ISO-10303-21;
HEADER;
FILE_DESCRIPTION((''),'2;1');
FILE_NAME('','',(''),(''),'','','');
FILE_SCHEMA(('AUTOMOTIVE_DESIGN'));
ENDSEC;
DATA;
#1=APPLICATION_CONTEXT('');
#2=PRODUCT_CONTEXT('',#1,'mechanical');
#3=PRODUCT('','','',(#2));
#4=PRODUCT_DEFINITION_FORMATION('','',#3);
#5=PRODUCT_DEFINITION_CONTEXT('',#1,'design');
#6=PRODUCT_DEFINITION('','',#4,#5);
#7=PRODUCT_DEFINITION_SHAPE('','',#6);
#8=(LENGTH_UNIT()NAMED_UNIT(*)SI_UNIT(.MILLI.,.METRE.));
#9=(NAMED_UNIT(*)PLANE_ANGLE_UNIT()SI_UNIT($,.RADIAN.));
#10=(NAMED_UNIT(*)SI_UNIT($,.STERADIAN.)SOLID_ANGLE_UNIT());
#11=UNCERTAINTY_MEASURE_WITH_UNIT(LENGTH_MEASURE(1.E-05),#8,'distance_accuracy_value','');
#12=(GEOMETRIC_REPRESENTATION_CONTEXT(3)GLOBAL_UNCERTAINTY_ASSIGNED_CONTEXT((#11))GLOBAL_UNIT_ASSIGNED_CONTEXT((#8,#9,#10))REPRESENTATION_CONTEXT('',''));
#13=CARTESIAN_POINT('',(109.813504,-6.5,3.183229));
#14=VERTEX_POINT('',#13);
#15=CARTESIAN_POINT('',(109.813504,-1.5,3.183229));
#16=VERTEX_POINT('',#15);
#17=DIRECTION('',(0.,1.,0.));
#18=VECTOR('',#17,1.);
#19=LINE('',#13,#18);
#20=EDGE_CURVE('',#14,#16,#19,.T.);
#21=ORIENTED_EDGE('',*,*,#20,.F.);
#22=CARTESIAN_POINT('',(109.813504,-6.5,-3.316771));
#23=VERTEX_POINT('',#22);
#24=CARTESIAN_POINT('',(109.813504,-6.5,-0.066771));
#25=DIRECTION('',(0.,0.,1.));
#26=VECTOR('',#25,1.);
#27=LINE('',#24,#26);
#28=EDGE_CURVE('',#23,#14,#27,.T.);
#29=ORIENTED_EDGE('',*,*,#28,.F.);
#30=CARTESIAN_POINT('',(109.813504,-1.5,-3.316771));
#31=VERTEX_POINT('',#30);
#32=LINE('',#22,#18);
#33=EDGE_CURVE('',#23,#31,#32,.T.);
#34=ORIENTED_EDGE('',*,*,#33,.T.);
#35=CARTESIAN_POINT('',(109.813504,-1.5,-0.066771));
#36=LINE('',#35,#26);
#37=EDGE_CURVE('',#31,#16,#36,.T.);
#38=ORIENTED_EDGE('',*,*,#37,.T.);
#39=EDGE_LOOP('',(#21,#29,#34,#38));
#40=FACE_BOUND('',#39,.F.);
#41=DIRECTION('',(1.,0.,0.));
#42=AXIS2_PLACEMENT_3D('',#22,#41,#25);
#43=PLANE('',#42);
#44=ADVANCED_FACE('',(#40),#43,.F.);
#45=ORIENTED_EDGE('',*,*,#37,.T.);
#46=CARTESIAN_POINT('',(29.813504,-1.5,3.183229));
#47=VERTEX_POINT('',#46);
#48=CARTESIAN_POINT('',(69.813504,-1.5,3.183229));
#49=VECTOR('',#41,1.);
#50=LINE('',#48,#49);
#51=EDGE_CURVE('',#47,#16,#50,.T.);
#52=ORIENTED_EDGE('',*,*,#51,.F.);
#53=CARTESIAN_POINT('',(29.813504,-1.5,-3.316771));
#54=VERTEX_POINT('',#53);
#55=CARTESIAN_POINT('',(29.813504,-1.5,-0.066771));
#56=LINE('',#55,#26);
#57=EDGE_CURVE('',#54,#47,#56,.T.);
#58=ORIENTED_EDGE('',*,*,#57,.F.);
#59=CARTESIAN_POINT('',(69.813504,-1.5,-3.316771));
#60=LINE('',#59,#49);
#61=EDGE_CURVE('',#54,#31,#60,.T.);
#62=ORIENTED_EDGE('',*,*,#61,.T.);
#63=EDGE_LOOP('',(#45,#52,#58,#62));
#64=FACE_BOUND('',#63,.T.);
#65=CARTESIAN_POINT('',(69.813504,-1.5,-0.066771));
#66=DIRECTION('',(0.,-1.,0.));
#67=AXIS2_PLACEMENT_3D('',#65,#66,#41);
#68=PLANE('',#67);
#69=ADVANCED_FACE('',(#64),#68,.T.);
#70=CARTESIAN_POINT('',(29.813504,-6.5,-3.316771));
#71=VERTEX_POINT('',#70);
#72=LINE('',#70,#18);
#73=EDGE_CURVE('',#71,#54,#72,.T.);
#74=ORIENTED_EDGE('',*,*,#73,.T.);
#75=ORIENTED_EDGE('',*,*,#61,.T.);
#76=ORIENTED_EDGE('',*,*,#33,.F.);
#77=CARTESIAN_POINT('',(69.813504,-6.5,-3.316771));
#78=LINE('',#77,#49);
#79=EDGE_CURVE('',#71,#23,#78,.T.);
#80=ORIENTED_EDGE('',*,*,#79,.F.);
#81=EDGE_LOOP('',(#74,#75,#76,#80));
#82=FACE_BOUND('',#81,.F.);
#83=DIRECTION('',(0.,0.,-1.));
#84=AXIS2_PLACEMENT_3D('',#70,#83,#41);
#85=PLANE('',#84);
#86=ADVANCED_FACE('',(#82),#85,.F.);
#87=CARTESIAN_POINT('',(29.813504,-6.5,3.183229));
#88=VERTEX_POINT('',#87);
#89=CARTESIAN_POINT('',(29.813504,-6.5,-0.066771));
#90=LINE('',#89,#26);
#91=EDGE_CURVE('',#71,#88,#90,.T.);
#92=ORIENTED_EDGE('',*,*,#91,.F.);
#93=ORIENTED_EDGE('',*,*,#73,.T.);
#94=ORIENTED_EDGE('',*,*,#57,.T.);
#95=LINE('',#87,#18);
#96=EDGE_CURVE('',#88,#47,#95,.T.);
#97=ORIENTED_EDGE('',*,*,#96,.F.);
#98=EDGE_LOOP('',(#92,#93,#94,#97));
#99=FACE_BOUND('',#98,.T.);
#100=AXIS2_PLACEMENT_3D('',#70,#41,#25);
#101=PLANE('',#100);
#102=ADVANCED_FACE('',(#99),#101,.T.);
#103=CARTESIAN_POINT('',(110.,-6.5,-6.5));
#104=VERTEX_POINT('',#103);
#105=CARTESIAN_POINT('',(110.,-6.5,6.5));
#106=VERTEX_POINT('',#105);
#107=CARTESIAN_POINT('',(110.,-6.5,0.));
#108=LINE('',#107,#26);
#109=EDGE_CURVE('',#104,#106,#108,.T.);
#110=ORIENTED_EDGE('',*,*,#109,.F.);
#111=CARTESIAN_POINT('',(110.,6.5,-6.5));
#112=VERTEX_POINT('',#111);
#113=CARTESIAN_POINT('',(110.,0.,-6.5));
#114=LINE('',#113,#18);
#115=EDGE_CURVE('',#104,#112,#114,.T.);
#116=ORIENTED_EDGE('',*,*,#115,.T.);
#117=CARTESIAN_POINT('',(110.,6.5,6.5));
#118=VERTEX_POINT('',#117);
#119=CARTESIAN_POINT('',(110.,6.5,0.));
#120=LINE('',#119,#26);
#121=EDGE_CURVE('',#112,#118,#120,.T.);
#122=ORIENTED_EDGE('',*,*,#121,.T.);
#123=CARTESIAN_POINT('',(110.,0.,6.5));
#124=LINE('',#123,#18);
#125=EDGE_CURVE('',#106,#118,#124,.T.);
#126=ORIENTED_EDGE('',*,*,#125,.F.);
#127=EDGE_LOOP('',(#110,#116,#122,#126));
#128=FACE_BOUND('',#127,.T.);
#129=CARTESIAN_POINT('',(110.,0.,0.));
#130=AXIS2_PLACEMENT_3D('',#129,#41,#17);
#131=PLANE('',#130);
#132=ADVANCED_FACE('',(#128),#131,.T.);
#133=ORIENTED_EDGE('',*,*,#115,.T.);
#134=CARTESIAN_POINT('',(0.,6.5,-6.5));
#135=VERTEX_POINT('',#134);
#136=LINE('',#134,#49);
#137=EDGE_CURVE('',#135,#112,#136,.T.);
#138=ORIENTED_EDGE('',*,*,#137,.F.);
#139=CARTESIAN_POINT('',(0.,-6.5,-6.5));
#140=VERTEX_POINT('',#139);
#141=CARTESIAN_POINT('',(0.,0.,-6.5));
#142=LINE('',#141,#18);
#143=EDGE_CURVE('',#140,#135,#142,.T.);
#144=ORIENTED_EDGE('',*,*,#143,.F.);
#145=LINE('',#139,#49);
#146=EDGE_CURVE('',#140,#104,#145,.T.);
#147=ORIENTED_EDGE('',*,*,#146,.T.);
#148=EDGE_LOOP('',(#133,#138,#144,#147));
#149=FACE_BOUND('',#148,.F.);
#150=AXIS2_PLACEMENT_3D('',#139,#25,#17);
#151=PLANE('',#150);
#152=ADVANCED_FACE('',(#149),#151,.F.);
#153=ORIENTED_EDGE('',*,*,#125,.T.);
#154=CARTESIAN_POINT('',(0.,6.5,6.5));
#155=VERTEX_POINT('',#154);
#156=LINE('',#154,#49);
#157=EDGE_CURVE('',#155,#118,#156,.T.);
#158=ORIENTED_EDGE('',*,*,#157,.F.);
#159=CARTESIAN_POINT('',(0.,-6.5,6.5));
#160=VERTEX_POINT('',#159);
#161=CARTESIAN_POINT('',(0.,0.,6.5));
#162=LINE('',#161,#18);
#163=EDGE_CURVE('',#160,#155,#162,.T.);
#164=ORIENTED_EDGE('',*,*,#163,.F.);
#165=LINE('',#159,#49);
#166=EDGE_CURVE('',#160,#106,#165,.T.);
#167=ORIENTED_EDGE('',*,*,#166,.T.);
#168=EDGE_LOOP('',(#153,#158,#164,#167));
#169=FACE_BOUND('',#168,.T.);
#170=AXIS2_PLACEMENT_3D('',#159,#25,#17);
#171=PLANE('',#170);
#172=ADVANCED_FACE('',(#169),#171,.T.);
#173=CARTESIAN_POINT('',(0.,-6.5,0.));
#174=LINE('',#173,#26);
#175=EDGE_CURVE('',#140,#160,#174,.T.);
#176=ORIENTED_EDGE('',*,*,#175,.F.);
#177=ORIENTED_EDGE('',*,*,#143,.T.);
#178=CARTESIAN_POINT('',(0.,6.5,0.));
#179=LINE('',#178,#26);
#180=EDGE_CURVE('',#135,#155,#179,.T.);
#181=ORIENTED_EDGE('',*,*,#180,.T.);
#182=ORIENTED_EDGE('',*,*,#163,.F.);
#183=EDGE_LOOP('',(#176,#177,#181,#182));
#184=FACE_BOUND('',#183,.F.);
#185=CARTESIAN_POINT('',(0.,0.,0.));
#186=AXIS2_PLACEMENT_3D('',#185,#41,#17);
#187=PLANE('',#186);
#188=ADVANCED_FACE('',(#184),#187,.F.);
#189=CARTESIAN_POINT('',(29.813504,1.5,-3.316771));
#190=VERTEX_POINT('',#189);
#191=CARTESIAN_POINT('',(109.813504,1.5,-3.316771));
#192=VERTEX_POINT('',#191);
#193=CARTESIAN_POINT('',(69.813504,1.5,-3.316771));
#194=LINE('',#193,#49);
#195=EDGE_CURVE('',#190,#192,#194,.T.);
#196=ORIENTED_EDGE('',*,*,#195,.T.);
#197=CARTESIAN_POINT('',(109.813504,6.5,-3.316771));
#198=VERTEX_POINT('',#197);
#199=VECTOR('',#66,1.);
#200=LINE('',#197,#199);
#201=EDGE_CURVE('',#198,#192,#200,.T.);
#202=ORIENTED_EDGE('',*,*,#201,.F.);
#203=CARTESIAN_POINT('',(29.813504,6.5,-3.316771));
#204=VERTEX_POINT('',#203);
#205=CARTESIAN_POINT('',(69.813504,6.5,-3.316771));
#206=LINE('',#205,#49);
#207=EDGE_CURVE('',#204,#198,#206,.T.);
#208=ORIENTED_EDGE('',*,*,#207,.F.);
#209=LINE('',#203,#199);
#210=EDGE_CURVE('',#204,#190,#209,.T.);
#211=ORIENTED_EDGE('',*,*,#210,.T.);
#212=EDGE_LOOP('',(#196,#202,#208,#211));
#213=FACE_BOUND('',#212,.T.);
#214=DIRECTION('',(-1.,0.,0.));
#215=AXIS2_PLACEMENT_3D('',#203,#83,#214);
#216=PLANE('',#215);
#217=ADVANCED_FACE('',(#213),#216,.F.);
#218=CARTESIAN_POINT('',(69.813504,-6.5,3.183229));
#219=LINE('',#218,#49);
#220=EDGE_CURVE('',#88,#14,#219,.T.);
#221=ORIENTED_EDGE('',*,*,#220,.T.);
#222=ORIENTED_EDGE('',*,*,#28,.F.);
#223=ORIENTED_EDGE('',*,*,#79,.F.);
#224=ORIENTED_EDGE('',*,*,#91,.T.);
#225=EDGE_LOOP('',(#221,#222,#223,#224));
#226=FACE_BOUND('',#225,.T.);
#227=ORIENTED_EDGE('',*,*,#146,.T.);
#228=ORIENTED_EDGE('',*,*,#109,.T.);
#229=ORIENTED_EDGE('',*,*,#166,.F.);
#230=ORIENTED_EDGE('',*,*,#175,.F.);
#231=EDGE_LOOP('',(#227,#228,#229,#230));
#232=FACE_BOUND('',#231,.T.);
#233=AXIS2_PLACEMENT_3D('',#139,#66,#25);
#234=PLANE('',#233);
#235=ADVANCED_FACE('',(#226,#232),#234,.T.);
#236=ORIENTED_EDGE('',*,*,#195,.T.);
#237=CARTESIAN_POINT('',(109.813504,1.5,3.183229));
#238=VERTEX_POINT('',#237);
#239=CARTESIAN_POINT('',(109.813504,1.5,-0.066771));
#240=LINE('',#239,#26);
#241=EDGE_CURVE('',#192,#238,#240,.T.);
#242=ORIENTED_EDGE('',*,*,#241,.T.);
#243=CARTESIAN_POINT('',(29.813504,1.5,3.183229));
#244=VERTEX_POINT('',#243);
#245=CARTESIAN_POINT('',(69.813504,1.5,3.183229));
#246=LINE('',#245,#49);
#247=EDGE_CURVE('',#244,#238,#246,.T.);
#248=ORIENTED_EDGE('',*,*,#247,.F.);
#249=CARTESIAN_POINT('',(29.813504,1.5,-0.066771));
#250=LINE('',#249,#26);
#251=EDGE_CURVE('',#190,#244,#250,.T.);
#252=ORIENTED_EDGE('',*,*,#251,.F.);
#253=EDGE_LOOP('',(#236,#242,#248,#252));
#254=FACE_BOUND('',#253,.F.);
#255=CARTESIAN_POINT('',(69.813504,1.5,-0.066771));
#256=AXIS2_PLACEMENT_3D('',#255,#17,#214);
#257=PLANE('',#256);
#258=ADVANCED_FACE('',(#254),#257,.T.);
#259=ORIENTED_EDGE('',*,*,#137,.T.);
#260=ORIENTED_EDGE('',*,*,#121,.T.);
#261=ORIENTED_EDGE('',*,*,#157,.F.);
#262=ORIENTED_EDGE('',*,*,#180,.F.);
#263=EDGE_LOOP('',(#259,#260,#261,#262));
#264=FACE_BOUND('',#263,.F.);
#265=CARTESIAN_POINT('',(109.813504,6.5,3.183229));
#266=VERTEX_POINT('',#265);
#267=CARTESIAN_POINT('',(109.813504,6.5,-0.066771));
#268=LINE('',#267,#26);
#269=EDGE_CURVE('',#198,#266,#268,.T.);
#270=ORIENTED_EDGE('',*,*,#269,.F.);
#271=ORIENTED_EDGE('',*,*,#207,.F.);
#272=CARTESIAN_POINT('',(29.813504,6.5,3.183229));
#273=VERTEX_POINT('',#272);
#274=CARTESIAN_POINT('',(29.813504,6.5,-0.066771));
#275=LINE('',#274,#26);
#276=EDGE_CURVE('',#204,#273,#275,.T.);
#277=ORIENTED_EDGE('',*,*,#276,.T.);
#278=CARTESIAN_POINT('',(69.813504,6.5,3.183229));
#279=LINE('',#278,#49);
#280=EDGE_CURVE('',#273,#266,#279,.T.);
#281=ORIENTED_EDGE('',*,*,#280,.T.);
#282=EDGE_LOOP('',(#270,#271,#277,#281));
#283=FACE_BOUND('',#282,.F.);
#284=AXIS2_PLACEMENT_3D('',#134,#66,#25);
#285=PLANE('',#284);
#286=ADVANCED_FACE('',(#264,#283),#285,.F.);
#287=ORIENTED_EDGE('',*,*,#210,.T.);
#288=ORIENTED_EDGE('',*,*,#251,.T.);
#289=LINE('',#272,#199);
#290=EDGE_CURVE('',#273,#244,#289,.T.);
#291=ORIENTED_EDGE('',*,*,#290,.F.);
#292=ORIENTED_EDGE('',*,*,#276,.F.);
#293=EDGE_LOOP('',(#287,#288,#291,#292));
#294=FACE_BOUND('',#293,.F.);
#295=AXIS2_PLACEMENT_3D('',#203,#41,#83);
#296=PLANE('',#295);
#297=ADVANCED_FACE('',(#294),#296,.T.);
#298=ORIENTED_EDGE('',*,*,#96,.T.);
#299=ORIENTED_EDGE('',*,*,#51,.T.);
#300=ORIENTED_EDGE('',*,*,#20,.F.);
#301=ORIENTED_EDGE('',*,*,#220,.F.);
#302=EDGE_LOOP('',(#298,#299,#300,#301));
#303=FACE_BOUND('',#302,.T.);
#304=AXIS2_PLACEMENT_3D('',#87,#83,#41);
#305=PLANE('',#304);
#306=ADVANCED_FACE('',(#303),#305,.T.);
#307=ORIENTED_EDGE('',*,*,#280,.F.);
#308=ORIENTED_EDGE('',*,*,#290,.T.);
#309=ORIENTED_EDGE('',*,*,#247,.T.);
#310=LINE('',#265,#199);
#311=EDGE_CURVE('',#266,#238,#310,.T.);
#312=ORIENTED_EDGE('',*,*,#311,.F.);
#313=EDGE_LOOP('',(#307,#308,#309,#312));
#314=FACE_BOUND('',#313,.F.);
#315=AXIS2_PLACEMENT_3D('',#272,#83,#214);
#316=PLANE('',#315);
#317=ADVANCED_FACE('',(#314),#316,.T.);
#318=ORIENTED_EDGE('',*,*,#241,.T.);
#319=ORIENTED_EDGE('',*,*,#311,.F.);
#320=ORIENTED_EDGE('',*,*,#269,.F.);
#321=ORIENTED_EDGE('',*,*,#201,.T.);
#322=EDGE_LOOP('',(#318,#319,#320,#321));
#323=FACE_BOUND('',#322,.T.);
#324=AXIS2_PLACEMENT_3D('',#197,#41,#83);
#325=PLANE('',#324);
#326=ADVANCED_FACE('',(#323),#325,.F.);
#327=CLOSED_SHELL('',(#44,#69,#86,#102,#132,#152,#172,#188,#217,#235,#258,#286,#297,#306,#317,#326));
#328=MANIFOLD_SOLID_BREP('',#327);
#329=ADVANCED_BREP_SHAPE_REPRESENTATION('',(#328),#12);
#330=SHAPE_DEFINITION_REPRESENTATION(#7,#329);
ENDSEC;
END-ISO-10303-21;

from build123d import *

# Parameters (mm, degrees)
F0_W     = 13
F0_H     = 13
F1_DEPTH = 110
F2_W     = 80
F2_H     = 6.5
F3_DEPTH = 5


# Not quite as in the source:
# - a pattern or mirror of a feature is missing from the dataset's text; its kind, count and spacing are read off the source's solid


with BuildPart() as f1:
    # F0 (on Right) → F1 (new body)
    with BuildSketch(Plane.YZ):
        Rectangle(F0_W, F0_H)
    extrude(amount=F1_DEPTH)

    # F2 (on face) → F3 (cut)
    with BuildSketch(Plane.XZ.offset(6.5)):
        with Locations((69.8135038838, -0.0667710053)):
            Rectangle(F2_W, F2_H)
    f3 = extrude(amount=-F3_DEPTH, mode=Mode.SUBTRACT)

    # F3_copies: F3 across plane
    add(f3.mirror(Plane.ZX), mode=Mode.SUBTRACT)


solid = f1.part
